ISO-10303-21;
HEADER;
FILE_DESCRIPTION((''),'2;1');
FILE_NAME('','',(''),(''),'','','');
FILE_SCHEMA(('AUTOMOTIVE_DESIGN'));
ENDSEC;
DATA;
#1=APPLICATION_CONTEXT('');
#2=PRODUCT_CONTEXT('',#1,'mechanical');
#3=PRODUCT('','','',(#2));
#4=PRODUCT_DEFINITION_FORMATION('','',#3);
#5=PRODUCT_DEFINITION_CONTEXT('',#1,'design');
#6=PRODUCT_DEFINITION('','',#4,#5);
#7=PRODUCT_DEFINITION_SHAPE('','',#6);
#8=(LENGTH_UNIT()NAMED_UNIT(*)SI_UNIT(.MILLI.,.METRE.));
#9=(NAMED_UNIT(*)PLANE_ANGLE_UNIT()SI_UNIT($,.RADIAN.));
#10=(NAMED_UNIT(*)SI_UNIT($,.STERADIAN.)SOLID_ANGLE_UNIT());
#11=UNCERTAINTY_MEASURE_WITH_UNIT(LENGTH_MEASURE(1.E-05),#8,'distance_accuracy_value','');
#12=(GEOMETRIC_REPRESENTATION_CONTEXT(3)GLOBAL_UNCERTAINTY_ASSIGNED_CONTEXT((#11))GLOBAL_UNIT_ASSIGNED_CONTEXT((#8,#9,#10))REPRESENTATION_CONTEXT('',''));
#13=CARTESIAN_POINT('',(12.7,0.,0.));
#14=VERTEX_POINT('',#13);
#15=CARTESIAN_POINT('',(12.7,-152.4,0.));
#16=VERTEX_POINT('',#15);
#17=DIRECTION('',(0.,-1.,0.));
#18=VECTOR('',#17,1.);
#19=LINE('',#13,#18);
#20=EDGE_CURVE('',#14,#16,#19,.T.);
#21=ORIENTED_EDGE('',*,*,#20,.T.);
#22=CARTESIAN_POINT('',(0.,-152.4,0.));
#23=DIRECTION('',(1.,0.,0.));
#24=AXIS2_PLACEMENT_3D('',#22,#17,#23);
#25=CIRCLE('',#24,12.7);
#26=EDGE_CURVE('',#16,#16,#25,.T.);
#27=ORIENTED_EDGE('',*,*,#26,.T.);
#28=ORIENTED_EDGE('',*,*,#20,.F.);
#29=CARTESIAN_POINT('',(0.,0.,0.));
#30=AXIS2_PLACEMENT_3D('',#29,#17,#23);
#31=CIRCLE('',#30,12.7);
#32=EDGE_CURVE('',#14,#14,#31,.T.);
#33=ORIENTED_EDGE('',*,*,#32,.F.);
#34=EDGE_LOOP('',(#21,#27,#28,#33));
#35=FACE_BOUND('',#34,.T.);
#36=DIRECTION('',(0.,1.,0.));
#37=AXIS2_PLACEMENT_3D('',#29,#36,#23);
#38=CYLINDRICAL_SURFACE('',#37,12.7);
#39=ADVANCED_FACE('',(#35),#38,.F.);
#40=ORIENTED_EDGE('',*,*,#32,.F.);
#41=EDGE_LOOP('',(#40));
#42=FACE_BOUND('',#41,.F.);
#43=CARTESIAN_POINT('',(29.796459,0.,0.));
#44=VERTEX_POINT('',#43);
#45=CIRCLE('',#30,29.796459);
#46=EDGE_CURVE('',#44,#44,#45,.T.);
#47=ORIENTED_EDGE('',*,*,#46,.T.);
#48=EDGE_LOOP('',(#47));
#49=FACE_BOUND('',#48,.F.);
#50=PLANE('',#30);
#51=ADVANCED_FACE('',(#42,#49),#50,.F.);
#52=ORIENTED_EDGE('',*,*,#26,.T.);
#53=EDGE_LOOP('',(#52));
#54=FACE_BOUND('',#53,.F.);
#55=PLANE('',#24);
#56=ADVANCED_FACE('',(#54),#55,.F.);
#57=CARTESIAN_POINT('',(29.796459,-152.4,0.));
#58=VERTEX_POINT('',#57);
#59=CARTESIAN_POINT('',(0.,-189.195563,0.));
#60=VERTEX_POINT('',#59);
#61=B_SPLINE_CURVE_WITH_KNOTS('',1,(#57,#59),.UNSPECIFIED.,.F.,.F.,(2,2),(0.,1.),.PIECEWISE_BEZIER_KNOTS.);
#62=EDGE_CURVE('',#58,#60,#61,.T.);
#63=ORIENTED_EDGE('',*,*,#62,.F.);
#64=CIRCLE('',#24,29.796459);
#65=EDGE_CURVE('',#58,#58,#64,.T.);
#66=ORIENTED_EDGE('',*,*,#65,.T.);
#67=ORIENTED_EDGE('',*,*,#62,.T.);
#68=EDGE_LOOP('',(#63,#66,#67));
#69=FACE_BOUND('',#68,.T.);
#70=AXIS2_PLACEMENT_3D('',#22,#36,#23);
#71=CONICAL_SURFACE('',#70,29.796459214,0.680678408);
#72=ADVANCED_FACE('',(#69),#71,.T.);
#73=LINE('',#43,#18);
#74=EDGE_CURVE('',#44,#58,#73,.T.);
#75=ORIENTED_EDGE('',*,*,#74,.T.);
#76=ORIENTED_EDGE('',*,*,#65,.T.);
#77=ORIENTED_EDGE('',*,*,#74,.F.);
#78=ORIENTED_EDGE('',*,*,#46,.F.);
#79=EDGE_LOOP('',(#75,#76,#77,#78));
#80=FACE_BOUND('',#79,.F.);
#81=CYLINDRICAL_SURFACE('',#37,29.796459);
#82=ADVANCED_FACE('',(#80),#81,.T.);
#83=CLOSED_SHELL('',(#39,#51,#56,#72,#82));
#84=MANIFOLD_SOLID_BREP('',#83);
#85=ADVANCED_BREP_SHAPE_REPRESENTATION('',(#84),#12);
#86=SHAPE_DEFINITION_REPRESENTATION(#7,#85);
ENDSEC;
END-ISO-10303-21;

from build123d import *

# Parameters (mm, degrees)
F0_R     = 29.796459214
F0_R_2   = 12.7
F1_DEPTH = 152.4
F2_R     = 29.796459214


# Not quite as in the source:
# - an extrude whose draft closes it to a point is written as a loft to that point


with BuildPart() as f1:
    # F0 (on Front) → F1 (new body)
    with BuildSketch(Plane.XZ):
        Circle(F0_R)
        Circle(F0_R_2, mode=Mode.SUBTRACT)
    extrude(amount=F1_DEPTH)

    # F2 (on face) → F3 section 0
    with BuildSketch(Plane.XZ.offset(152.4), mode=Mode.PRIVATE) as f3_s0:
        Circle(F2_R)
    loft([f3_s0.sketch, Vertex(0, -189.1955627582, 0)], ruled=True)


solid = f1.part
